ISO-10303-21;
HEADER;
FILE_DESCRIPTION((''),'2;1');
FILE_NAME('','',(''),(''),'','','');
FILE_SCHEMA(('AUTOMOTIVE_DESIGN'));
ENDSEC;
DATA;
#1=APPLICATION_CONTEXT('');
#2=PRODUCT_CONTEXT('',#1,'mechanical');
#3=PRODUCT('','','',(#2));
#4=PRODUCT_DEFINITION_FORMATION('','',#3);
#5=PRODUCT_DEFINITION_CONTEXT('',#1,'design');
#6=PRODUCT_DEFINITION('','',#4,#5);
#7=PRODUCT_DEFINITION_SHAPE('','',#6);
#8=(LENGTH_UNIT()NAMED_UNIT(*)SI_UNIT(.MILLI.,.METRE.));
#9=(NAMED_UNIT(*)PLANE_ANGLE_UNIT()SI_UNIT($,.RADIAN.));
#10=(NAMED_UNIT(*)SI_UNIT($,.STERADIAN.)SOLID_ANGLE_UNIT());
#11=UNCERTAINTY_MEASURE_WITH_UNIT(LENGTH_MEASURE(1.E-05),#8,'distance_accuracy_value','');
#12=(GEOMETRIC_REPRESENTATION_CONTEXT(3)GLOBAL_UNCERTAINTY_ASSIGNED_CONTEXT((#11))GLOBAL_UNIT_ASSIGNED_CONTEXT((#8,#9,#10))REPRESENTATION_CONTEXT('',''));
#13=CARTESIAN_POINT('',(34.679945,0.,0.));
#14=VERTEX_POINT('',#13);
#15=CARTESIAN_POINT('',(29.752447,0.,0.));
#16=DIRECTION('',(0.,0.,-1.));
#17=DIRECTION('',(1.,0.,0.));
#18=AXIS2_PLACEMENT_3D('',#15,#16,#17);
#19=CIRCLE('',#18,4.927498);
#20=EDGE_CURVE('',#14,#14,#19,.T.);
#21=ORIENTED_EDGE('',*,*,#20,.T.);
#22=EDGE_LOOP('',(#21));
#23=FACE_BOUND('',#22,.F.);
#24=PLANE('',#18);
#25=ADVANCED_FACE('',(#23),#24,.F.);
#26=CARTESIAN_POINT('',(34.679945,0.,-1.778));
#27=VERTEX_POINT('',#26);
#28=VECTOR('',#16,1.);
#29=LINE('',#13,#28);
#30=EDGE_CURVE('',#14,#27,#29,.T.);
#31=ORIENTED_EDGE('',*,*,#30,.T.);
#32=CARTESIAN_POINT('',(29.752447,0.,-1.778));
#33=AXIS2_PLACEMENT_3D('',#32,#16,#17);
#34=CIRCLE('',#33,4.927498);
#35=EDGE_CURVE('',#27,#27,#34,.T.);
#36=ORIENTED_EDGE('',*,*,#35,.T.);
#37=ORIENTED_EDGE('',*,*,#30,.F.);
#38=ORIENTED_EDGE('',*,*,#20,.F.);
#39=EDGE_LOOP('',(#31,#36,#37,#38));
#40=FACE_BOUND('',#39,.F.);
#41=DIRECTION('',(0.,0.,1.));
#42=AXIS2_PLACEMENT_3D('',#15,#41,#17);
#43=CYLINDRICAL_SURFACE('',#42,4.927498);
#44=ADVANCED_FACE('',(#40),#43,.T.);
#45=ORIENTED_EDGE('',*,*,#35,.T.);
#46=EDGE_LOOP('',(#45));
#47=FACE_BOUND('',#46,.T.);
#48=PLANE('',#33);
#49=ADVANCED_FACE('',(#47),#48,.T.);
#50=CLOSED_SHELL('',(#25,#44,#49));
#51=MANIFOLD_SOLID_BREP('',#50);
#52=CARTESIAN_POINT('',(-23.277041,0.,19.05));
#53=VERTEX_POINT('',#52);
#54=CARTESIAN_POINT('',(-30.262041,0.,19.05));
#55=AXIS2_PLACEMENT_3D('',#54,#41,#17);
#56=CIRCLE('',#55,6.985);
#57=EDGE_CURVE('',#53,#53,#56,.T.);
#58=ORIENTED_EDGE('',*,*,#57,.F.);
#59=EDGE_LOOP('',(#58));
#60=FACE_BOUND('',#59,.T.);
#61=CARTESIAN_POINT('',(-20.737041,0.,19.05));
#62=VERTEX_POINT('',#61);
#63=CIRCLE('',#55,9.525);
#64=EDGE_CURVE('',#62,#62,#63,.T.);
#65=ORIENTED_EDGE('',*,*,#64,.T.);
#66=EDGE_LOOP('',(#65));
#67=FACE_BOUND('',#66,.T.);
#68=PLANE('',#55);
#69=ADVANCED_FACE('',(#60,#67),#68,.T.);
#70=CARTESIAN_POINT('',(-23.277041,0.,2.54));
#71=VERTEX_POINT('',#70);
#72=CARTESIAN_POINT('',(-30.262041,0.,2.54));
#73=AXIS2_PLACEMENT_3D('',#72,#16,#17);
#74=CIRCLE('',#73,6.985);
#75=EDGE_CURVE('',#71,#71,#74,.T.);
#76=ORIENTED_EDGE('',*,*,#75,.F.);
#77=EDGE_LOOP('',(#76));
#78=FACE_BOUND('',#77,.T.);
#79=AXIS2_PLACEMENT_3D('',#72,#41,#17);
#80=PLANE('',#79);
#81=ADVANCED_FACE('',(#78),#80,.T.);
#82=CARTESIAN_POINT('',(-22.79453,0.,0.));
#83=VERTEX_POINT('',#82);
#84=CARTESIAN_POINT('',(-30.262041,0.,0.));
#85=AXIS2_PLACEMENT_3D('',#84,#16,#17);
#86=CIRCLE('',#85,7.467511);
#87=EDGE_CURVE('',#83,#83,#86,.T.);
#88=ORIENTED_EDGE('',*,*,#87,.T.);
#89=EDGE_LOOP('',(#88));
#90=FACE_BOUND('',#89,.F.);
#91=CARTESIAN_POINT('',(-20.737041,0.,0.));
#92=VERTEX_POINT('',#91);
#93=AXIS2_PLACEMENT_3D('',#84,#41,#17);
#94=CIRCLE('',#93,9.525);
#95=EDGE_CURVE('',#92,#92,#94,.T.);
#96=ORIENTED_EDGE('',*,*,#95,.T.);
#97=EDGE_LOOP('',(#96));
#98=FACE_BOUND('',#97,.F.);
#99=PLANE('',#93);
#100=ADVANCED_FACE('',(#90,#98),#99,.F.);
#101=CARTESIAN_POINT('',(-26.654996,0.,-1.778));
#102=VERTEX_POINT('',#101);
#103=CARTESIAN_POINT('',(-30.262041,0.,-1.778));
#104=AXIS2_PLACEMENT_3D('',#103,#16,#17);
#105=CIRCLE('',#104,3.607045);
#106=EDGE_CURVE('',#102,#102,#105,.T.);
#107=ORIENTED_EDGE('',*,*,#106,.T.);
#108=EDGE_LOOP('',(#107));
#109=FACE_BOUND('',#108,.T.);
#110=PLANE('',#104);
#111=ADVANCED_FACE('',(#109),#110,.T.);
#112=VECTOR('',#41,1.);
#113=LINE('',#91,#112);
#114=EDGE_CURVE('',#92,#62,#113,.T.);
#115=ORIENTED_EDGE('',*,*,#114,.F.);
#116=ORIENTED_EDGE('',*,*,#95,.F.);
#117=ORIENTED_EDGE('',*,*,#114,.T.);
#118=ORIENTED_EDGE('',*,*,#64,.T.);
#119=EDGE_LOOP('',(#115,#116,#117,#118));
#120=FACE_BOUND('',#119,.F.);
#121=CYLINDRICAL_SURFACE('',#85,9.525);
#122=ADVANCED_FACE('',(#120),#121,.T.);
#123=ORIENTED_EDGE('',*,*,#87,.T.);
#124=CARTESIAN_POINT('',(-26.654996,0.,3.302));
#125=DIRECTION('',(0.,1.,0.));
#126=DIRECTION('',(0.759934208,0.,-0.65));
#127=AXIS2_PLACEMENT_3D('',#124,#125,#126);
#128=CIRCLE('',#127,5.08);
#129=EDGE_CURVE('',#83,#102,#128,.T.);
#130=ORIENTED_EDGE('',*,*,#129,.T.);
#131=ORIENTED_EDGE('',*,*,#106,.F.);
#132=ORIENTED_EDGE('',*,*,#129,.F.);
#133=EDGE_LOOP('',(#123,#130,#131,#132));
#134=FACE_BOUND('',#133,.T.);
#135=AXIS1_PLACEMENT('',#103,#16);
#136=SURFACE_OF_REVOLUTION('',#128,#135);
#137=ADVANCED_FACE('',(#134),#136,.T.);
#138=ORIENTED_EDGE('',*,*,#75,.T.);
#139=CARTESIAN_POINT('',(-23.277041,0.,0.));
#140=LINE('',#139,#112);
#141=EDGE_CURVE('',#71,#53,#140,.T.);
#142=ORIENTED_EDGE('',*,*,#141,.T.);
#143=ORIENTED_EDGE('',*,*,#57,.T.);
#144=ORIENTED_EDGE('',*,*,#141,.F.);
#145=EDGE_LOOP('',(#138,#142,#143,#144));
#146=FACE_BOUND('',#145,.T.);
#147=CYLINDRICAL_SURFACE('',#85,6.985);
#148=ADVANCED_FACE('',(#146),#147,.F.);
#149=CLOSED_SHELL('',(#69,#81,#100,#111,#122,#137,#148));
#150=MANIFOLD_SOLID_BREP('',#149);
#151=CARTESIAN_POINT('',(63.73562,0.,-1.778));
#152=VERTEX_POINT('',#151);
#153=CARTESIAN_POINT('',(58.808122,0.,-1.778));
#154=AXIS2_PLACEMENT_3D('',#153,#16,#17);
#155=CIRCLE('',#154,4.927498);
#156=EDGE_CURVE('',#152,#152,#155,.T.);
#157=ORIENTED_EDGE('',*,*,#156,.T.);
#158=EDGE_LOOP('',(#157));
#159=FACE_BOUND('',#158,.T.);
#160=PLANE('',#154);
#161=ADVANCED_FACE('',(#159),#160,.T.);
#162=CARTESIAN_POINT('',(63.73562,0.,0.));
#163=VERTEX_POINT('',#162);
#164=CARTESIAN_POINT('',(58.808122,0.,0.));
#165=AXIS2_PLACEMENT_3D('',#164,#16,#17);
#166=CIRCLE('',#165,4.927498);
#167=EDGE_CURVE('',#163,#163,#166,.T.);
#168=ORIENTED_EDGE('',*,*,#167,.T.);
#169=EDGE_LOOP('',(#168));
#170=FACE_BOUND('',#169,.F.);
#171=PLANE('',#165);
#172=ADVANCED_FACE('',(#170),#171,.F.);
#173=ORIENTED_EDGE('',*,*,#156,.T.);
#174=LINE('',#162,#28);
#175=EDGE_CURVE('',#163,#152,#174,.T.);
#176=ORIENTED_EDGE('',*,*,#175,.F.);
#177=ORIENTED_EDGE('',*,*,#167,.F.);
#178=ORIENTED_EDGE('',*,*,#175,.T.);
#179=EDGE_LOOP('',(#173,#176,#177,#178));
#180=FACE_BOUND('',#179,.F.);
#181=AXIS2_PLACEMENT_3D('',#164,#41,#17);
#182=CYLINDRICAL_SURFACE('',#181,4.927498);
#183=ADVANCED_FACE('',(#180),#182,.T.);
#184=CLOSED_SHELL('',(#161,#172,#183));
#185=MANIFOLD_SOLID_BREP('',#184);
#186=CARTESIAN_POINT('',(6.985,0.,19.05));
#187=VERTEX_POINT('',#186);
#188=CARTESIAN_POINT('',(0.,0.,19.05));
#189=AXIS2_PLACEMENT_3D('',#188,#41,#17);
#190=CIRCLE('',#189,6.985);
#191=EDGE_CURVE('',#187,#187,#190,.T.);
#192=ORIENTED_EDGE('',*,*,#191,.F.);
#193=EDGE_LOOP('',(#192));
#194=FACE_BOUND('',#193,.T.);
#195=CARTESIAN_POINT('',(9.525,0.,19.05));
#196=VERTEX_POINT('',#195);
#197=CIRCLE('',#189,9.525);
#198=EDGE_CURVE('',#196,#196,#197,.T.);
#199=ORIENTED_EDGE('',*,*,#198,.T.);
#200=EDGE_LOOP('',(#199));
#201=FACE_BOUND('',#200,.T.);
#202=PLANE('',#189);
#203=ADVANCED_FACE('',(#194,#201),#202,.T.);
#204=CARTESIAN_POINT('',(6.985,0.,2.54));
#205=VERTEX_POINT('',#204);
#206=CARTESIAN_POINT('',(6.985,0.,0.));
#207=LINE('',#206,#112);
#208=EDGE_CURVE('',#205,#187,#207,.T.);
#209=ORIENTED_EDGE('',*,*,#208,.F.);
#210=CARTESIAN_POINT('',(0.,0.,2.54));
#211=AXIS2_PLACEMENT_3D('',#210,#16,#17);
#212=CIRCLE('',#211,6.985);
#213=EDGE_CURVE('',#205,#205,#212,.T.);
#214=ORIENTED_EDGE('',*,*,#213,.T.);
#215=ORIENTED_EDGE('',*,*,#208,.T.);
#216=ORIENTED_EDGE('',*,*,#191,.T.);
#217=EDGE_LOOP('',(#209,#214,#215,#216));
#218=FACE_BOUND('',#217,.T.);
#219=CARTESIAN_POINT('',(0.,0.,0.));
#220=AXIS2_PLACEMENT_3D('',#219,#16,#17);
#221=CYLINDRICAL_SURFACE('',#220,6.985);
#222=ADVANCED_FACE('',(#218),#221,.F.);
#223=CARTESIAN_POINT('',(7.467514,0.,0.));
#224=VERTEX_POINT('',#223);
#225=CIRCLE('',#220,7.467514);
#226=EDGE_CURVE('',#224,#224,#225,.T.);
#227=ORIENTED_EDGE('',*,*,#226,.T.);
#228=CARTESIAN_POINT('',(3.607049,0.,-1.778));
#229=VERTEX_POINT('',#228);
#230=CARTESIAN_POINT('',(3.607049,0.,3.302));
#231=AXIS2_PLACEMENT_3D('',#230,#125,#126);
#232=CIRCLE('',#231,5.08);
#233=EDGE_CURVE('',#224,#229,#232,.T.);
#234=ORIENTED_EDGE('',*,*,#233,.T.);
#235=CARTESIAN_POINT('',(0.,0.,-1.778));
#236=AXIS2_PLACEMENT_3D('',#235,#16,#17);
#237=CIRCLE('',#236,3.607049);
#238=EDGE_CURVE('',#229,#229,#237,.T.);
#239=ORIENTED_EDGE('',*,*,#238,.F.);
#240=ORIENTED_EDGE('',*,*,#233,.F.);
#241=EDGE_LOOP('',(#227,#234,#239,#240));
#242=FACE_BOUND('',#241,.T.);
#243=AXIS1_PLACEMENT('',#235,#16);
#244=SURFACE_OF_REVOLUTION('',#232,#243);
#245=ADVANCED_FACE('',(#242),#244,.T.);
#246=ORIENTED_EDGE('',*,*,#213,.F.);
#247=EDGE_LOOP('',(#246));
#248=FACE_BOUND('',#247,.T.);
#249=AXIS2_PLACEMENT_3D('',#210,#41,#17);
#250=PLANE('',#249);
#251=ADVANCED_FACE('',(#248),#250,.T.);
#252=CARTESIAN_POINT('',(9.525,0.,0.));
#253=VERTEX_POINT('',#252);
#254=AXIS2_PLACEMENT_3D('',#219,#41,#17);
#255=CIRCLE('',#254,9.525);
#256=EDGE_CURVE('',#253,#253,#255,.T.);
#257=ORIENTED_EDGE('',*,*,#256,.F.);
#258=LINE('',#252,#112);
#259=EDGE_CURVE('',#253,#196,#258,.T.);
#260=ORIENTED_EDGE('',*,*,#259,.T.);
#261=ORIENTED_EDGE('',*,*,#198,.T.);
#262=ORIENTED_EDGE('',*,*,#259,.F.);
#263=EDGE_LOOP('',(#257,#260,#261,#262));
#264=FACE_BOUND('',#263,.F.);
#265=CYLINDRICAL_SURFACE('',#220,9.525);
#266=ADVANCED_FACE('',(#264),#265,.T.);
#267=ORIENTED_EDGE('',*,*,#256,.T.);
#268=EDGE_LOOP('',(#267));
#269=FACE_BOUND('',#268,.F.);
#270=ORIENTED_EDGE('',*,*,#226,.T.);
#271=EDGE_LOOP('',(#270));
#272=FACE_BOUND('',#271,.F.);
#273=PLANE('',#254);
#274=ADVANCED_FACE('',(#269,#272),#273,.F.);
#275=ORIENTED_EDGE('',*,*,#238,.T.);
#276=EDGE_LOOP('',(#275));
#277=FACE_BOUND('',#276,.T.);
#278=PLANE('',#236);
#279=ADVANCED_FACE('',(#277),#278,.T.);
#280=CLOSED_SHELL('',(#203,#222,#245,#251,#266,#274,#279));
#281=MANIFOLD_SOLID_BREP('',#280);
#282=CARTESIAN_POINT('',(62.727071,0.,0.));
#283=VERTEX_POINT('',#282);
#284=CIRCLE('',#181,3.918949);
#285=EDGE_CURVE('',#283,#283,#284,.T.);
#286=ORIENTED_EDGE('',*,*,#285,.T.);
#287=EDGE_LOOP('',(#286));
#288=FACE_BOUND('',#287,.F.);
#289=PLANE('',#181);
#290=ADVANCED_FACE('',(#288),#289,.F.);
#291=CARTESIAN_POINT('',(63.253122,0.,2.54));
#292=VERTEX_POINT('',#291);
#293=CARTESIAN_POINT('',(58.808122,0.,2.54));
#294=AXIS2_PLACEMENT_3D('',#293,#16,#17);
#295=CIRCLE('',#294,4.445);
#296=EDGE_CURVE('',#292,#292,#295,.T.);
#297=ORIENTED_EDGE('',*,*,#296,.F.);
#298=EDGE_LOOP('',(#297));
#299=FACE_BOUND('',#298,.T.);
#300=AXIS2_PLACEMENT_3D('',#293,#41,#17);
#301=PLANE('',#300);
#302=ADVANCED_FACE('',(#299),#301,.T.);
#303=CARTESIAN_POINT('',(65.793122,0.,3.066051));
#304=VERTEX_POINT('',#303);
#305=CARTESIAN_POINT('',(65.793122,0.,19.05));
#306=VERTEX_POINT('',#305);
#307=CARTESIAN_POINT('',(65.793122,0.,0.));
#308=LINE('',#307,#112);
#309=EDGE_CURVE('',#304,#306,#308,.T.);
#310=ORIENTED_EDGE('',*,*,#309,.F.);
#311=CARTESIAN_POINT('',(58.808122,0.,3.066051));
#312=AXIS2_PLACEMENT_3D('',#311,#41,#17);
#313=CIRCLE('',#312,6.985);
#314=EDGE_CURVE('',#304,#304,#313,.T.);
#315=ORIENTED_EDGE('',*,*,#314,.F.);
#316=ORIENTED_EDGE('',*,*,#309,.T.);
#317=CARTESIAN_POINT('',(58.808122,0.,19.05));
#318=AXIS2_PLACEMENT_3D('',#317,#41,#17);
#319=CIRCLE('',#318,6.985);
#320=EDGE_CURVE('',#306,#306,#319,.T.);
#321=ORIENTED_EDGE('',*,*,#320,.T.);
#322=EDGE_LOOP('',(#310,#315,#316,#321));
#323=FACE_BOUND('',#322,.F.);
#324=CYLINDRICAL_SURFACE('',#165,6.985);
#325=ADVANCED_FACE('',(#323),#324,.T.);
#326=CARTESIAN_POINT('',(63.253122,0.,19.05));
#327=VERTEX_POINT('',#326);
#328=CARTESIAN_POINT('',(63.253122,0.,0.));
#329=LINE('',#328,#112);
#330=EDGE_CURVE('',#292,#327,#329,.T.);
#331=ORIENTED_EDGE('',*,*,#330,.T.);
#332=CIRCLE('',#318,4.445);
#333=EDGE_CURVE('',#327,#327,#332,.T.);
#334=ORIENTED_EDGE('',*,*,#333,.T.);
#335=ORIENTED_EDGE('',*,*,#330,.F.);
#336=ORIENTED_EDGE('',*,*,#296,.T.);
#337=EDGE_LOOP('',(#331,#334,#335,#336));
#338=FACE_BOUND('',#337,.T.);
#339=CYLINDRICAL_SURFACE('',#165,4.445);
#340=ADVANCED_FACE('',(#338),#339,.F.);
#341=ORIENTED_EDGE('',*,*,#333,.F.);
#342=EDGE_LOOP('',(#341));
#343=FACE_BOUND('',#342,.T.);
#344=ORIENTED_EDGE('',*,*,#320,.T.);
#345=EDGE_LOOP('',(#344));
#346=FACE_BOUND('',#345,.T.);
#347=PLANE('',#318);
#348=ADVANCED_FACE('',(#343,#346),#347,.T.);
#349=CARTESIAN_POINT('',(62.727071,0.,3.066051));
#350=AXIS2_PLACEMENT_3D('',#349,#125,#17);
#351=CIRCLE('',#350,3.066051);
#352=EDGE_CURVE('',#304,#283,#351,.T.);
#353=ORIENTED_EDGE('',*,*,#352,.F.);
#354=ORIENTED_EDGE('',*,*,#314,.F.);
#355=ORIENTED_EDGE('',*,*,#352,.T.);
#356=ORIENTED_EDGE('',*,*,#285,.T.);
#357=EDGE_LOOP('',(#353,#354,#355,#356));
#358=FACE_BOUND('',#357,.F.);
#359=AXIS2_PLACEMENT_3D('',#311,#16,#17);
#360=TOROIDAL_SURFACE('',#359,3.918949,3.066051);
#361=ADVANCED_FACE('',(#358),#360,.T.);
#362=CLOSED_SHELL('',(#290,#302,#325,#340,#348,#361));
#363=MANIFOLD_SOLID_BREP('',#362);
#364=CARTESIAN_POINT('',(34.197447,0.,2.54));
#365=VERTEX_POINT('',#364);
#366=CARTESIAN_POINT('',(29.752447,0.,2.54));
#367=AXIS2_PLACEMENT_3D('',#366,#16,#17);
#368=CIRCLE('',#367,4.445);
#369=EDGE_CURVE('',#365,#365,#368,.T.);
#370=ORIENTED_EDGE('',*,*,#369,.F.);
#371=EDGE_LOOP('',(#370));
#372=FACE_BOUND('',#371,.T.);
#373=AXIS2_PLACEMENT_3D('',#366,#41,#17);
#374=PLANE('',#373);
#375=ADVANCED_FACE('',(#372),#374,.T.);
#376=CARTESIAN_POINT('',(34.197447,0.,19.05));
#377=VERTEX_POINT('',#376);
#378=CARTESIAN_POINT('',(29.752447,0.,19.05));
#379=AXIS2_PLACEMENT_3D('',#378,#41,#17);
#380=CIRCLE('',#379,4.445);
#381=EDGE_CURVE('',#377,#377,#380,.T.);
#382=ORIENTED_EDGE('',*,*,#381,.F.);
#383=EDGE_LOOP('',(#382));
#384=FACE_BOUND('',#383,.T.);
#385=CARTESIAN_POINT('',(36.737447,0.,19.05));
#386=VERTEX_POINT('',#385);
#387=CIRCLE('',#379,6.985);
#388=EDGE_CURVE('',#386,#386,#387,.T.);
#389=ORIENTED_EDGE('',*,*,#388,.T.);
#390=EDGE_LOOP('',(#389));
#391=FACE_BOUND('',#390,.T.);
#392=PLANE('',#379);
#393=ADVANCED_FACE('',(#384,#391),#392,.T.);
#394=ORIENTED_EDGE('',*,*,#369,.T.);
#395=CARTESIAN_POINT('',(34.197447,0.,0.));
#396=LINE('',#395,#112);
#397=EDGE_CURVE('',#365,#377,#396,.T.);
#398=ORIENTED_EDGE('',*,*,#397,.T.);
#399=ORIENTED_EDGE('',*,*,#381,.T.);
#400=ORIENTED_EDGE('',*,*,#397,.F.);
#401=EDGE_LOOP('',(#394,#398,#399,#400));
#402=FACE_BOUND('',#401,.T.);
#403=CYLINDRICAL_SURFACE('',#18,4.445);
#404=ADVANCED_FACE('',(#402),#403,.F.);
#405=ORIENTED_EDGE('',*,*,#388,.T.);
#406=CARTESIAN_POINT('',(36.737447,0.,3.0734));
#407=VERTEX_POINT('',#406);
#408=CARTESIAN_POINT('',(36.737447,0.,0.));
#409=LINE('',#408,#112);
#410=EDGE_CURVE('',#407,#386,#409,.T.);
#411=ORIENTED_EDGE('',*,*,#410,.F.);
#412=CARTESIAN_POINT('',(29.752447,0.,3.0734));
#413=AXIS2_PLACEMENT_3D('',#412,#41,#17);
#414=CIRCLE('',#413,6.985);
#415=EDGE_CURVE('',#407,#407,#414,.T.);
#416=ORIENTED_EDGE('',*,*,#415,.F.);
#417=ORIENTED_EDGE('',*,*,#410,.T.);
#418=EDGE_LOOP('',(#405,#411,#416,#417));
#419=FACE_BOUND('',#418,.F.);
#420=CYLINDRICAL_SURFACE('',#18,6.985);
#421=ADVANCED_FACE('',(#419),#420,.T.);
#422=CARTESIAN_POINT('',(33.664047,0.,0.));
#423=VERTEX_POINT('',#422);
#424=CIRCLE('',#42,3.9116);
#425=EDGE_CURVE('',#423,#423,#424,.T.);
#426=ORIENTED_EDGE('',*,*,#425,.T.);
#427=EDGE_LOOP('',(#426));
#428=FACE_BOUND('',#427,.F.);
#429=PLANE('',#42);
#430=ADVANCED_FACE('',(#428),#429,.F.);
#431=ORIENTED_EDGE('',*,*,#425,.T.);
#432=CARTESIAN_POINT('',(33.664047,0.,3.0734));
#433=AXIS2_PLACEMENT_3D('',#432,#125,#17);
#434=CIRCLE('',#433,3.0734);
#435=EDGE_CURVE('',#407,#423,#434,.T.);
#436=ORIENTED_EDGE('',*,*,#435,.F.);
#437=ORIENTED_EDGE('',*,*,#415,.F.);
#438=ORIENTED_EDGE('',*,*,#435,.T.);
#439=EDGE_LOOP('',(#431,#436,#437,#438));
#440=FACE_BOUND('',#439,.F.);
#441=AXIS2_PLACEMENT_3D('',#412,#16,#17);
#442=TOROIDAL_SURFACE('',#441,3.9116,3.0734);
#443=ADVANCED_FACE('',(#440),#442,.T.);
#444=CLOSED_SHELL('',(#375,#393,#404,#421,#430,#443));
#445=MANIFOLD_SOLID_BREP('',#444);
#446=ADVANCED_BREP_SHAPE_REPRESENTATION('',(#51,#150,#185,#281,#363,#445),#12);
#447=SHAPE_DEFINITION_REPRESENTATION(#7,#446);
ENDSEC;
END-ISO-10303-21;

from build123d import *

# Parameters (mm, degrees)
F0_R      = 9.525
F1_DEPTH  = 19.05
F2_T      = -2.54
F3_R      = 7.4675144066
F4_DEPTH  = 1.778
F6_R      = 9.525
F7_DEPTH  = 19.05
F8_T      = -2.54
F9_R      = 7.4675111
F10_DEPTH = 1.778
F12_R     = 6.985
F13_DEPTH = 19.05
F14_T     = -2.54
F14_2_T   = -2.54
F15_R     = 4.9274984
F17_DEPTH = 1.778
F16_R     = 4.9274984
F18_R     = 3.0660512242
F19_R     = 3.0734


# Not quite as in the source:
# - a fillet or chamfer that OpenCascade refuses, or shapes differently, is made with other operations: its cross-section is extruded or revolved along the edge and cut away or added


with BuildPart() as f1:
    # F0 (on Top) → F1 (new body)
    with BuildSketch(Plane.XY):
        Circle(F0_R)
    extrude(amount=F1_DEPTH)

    # F2
    f2_openings = [f1.faces().sort_by_distance(p)[0] for p in [
        (0, 0, 19.05),
    ]]
    offset(amount=F2_T, openings=f2_openings)

    # F3 (on face) → F4 (join)
    with BuildSketch(Plane(origin=(0, 0, 0), x_dir=(1, 0, 0), z_dir=(0, 0, -1))):
        Circle(F3_R)
    extrude(amount=F4_DEPTH)

    # F5: fillet of radius 5.08 on 1 edges, made by hand

    # F5_s1 → F5_t2 (revolve, cut)
    with BuildSketch(Plane.XZ):
        with BuildLine():
            ThreePointArc((7.4675144066, 0), (5.732165099, -1.3121391396), (3.6070486316, -1.778))
            Line((3.6070486316, -1.778), (7.4675144066, -1.778))
            Line((7.4675144066, -1.778), (7.4675144066, 0))
        make_face()
    revolve(axis=Axis((0, 0, -1.778), (0, 0, -1)), mode=Mode.SUBTRACT)


with BuildPart() as f7:
    # F6 (on Top) → F7 (new body)
    with BuildSketch(Plane.XY):
        with Locations((-30.2620413402, 0)):
            Circle(F6_R)
    extrude(amount=F7_DEPTH)

    # F8
    f8_openings = [f7.faces().sort_by_distance(p)[0] for p in [
        (-30.262041, 0, 19.05),
    ]]
    offset(amount=F8_T, openings=f8_openings)

    # F9 (on face) → F10 (join)
    with BuildSketch(Plane(origin=(0, 0, 0), x_dir=(1, 0, 0), z_dir=(0, 0, -1))):
        with Locations((-30.2620413402, 0)):
            Circle(F9_R)
    extrude(amount=F10_DEPTH)

    # F11: fillet of radius 5.08 on 1 edges, made by hand

    # F11_s1 → F11_t2 (revolve, cut)
    with BuildSketch(Plane.XZ):
        with BuildLine():
            ThreePointArc((-22.7945302402, 0), (-24.5298795478, -1.3121391396), (-26.6549960152, -1.778))
            Line((-26.6549960152, -1.778), (-22.7945302402, -1.778))
            Line((-22.7945302402, -1.778), (-22.7945302402, 0))
        make_face()
    revolve(axis=Axis((-30.2620413402, 0, -1.778), (0, 0, -1)), mode=Mode.SUBTRACT)


with BuildPart() as f13:
    # F12 (on Top) → F13 (new body)
    with BuildSketch(Plane.XY):
        with Locations((29.7524470468, 0)):
            Circle(F12_R)
    extrude(amount=F13_DEPTH)

    # F14#2
    f14_2_openings = [f13.faces().sort_by_distance(p)[0] for p in [
        (29.752447, 0, 19.05),
    ]]
    offset(amount=F14_2_T, openings=f14_2_openings)

    # F19
    f19_edges = [f13.edges().sort_by_distance(p)[0] for p in [
        (22.767447, 0, 0),
    ]]
    fillet(f19_edges, radius=F19_R)


with BuildPart() as f13b:
    # F12 (on Top) → F13, piece 2 (new body)
    with BuildSketch(Plane.XY):
        with Locations((58.8081218302, 0)):
            Circle(F12_R)
    extrude(amount=F13_DEPTH)

    # F14
    f14_openings = [f13b.faces().sort_by_distance(p)[0] for p in [
        (58.808122, 0, 19.05),
    ]]
    offset(amount=F14_T, openings=f14_openings)

    # F18
    f18_edges = [f13b.edges().sort_by_distance(p)[0] for p in [
        (51.823122, 0, 0),
    ]]
    fillet(f18_edges, radius=F18_R)


with BuildPart() as f17:
    # F15 (on face) → F17 (new body)
    with BuildSketch(Plane(origin=(0, 0, 0), x_dir=(1, 0, 0), z_dir=(0, 0, -1))):
        with Locations((29.7524470468, 0)):
            Circle(F15_R)
    extrude(amount=F17_DEPTH)


with BuildPart() as f17b:
    # F16 (on face) → F17, piece 2 (new body)
    with BuildSketch(Plane(origin=(0, 0, 0), x_dir=(1, 0, 0), z_dir=(0, 0, -1))):
        with Locations((58.8081218302, 0)):
            Circle(F16_R)
    extrude(amount=F17_DEPTH)


solid = Compound([f1.part, f7.part, f13.part, f13b.part, f17.part, f17b.part])
